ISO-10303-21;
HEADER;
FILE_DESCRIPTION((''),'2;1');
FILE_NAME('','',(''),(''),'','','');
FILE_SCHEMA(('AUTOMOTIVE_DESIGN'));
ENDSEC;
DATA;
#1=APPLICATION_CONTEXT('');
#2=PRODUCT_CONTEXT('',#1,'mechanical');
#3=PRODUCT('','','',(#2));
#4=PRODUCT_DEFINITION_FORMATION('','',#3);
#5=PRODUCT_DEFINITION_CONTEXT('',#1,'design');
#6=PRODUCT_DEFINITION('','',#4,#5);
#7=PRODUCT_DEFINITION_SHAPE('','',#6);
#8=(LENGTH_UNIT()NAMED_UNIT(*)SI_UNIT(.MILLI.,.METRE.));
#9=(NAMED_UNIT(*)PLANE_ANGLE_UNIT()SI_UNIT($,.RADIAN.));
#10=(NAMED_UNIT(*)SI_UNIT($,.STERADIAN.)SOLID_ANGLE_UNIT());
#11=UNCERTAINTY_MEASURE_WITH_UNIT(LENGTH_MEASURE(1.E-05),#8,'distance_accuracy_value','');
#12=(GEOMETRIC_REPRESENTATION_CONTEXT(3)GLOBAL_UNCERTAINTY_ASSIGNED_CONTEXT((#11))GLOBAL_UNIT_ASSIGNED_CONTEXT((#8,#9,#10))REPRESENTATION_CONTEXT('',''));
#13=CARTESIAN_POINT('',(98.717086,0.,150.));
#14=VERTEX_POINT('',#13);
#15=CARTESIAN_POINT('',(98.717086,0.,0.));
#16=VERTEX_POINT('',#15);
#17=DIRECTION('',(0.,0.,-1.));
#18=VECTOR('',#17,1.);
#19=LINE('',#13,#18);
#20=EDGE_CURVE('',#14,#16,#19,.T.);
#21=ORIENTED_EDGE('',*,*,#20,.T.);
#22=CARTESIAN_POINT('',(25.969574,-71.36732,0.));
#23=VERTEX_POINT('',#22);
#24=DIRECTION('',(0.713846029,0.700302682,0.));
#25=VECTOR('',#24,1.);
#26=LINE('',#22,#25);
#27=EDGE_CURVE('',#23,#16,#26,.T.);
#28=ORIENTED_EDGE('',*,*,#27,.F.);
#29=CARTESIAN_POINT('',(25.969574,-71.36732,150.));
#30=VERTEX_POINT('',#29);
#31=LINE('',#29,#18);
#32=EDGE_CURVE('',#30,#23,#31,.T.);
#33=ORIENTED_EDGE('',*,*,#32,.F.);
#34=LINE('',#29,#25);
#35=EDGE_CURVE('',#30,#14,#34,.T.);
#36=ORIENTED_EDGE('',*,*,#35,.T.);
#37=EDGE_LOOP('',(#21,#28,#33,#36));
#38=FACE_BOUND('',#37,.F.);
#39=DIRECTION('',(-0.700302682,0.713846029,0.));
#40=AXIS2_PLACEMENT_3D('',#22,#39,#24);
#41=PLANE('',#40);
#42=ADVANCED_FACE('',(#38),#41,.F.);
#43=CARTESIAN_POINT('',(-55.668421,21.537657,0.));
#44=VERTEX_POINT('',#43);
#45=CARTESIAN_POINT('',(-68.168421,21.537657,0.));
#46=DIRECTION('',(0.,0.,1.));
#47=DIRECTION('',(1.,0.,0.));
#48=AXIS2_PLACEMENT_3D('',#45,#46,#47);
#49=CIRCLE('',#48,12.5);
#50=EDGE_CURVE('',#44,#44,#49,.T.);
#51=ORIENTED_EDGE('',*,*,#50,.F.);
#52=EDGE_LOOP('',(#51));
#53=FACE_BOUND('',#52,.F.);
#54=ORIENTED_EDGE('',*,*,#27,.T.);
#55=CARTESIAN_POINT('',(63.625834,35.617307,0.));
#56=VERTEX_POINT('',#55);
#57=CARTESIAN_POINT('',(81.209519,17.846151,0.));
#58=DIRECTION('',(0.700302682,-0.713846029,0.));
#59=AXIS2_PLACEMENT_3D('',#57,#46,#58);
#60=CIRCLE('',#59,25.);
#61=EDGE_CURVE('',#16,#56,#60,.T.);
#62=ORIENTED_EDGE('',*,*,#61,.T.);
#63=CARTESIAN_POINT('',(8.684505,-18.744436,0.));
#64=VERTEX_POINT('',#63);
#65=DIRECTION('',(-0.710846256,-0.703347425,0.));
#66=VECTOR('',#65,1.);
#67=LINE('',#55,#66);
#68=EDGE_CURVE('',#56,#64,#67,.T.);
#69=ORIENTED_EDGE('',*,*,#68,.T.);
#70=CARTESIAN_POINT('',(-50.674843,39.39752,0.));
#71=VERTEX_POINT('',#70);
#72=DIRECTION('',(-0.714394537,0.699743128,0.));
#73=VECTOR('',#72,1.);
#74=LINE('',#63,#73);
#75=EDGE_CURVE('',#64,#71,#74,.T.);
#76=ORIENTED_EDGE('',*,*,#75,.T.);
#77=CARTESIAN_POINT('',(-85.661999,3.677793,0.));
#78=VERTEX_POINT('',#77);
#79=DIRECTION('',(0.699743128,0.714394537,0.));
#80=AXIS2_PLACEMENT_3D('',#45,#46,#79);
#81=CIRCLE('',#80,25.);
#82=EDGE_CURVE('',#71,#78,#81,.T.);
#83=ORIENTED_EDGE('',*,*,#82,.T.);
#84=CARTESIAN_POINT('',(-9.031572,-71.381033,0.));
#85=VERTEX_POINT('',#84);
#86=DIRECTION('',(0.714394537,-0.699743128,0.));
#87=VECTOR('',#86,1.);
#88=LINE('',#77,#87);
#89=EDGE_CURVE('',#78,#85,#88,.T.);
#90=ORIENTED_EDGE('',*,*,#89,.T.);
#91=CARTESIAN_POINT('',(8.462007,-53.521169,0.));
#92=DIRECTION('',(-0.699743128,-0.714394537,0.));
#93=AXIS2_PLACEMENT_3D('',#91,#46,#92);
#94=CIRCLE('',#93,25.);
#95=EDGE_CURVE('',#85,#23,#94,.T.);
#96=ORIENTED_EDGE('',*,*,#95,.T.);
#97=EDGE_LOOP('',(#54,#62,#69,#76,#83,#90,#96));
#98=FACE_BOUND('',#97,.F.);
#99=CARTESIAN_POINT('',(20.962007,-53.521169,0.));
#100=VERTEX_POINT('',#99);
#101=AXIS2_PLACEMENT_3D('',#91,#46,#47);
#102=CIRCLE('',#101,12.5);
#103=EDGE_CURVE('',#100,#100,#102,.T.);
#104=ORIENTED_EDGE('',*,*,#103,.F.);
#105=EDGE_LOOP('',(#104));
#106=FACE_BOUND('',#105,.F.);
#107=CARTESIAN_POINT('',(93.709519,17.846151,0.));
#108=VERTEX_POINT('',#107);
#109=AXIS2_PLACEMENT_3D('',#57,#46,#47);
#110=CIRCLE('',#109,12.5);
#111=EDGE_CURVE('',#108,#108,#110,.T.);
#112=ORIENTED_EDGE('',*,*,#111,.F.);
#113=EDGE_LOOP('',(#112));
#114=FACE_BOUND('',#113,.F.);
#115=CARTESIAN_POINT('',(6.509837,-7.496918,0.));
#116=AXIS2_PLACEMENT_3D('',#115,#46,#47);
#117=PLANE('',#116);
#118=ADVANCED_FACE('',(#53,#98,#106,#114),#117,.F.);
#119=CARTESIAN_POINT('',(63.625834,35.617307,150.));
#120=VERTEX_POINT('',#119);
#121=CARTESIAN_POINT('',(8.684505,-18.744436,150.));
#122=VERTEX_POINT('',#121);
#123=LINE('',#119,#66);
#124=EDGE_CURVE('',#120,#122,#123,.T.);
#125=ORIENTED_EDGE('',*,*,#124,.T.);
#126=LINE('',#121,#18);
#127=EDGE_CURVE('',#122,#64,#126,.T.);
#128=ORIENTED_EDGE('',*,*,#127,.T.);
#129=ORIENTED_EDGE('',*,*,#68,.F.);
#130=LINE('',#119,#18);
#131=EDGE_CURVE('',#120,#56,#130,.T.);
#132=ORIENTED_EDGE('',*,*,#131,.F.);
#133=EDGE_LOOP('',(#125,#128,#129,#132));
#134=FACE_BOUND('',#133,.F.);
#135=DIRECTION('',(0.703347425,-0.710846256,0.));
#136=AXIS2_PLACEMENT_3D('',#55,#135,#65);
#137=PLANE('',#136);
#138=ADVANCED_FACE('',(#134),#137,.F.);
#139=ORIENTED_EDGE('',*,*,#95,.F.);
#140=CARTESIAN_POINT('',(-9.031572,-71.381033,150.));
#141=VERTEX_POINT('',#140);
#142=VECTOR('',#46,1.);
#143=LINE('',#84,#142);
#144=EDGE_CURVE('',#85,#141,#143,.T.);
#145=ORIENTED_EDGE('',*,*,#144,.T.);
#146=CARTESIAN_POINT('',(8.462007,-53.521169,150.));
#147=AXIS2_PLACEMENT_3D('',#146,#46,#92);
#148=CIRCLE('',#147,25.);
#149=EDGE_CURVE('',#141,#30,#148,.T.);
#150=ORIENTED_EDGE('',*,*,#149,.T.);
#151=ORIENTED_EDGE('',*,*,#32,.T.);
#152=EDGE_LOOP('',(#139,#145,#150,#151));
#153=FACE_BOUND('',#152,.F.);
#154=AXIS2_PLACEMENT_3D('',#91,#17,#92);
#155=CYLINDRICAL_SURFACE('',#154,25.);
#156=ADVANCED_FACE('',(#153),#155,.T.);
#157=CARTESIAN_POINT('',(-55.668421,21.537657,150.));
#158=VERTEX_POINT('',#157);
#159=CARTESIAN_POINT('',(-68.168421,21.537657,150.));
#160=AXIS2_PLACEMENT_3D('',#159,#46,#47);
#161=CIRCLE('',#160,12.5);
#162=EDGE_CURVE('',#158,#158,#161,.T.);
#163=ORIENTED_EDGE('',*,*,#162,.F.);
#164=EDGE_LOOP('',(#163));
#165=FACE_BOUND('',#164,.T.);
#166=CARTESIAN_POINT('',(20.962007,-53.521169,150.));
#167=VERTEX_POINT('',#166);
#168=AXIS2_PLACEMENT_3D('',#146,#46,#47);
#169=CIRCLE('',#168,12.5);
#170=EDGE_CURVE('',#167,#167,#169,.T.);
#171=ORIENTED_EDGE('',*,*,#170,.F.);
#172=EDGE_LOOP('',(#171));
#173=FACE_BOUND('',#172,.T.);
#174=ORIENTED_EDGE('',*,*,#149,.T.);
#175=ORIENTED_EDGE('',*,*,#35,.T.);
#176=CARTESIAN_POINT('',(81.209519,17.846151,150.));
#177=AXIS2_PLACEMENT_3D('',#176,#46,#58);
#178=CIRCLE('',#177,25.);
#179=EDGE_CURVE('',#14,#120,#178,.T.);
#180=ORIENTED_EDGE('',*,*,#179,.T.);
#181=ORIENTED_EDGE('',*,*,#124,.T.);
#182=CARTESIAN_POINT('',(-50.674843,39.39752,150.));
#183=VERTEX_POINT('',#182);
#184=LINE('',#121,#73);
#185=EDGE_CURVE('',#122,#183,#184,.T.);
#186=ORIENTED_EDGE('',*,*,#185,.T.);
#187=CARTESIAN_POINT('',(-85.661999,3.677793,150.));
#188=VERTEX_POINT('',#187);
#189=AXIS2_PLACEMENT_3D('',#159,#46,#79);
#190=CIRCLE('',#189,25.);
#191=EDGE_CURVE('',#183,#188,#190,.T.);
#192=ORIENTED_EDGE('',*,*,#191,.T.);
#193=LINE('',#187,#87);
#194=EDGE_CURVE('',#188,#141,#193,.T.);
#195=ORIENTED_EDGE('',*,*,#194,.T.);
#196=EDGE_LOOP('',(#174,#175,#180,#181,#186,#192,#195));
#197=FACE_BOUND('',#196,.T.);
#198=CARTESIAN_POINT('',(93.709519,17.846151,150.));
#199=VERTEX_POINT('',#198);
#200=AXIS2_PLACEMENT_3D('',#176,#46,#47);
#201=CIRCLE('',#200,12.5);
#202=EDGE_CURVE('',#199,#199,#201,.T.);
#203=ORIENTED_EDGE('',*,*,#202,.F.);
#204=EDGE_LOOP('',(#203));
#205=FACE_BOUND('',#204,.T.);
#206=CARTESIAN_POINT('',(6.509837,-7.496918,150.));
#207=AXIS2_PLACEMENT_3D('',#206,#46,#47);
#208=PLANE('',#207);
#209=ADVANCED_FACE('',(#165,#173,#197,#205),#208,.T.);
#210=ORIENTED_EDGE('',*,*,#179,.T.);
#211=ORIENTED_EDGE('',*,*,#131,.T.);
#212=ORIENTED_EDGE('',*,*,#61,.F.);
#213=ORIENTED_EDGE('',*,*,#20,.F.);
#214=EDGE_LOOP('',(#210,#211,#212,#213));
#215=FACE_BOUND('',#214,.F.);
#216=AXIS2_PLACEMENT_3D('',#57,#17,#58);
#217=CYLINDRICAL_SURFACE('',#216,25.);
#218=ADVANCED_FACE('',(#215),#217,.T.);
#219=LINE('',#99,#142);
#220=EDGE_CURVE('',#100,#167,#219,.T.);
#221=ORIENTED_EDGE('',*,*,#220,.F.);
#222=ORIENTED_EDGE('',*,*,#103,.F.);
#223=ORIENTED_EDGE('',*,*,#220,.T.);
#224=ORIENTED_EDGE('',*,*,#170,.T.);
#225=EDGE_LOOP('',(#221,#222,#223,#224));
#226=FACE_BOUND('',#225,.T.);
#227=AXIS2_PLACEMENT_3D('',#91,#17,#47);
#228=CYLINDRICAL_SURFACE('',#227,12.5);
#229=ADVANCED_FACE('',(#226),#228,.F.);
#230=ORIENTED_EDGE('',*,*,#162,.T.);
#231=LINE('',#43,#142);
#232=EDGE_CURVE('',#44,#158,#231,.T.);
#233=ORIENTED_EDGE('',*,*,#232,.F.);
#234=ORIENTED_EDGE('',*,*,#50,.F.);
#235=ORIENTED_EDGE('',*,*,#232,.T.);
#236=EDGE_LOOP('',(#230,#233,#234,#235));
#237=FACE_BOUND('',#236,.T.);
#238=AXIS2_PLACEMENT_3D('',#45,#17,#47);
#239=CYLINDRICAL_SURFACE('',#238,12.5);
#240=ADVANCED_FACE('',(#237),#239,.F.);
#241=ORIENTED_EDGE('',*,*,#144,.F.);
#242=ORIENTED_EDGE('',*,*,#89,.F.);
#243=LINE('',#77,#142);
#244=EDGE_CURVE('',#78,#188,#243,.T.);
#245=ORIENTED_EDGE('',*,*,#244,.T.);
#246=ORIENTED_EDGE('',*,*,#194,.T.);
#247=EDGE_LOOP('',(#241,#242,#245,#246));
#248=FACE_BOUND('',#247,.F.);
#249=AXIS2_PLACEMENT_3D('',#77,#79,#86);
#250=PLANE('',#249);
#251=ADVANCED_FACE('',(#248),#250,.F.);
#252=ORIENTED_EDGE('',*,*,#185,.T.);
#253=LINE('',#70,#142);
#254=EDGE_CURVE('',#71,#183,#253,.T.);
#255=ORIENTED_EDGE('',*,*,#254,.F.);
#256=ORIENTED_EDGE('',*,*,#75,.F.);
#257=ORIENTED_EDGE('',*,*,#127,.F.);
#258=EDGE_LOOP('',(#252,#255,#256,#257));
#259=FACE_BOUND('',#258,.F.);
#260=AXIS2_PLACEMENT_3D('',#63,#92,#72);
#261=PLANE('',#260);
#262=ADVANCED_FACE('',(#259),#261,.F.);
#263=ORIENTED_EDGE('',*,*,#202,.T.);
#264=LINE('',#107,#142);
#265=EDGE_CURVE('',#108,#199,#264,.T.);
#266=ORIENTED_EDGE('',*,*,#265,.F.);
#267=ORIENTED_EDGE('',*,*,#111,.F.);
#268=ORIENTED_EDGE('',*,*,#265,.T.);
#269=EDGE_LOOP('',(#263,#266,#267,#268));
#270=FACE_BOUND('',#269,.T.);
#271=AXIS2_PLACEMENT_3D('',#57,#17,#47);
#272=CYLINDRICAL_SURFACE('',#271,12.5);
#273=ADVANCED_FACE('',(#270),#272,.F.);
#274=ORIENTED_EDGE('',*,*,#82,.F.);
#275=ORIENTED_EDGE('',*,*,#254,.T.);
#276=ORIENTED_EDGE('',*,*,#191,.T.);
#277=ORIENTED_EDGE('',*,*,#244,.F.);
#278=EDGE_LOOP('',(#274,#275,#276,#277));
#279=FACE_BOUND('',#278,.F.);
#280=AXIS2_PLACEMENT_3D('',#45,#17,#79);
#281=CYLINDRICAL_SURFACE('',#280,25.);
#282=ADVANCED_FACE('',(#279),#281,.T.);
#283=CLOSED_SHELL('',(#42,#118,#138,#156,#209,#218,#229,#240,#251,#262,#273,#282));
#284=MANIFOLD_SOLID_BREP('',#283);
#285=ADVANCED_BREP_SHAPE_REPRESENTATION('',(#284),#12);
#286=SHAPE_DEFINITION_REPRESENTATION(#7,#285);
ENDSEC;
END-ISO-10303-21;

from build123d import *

# Parameters (mm, degrees)
F0_R     = 12.5
F1_DEPTH = 150
F3_DEPTH = 50


# Not quite as in the source:
# - the program builds the solid bodies; features that only make, move or delete a surface that nothing else refers to are left out


with BuildPart() as f1:
    # F0 (on Top) → F1 (new body)
    with BuildSketch(Plane.XY):
        with BuildLine():
            Line((8.6845052377, -18.7444362128), (-50.6748429861, 39.3975202147))
            ThreePointArc((-50.6748429861, 39.3975202147), (-86.0282846169, 39.0312350068), (-85.661999409, 3.6777933759))
            Line((-85.661999409, 3.6777933759), (-9.0315715293, -71.3810327757))
            ThreePointArc((-9.0315715293, -71.3810327757), (8.4718011348, -78.5211674377), (25.9695737293, -71.3673200922))
            Line((25.9695737293, -71.3673200922), (98.7170861934, 0))
            ThreePointArc((98.7170861934, 0), (99.0182133881, 35.3918171352), (63.6258335307, 35.6173071466))
            Line((63.6258335307, 35.6173071466), (8.6845052377, -18.7444362128))
        make_face()
        with Locations((8.4620066821, -53.5211693563)):
            Circle(F0_R, mode=Mode.SUBTRACT)
        with Locations((-68.1684211975, 21.5376567953)):
            Circle(F0_R, mode=Mode.SUBTRACT)
        with Locations((81.2095191462, 17.8461507359)):
            Circle(F0_R, mode=Mode.SUBTRACT)
    extrude(amount=F1_DEPTH)

    # F0 (on Top) → F3 (join)
    with BuildSketch(Plane.XY):
        with BuildLine():
            Line((8.6845052377, -18.7444362128), (-50.6748429861, 39.3975202147))
            ThreePointArc((-50.6748429861, 39.3975202147), (-86.0282846169, 39.0312350068), (-85.661999409, 3.6777933759))
            Line((-85.661999409, 3.6777933759), (-9.0315715293, -71.3810327757))
            ThreePointArc((-9.0315715293, -71.3810327757), (8.4718011348, -78.5211674377), (25.9695737293, -71.3673200922))
            Line((25.9695737293, -71.3673200922), (98.7170861934, 0))
            ThreePointArc((98.7170861934, 0), (99.0182133881, 35.3918171352), (63.6258335307, 35.6173071466))
            Line((63.6258335307, 35.6173071466), (8.6845052377, -18.7444362128))
        make_face()
        with Locations((8.4620066821, -53.5211693563)):
            Circle(F0_R, mode=Mode.SUBTRACT)
        with Locations((-68.1684211975, 21.5376567953)):
            Circle(F0_R, mode=Mode.SUBTRACT)
        with Locations((81.2095191462, 17.8461507359)):
            Circle(F0_R, mode=Mode.SUBTRACT)
    extrude(amount=F3_DEPTH)


solid = f1.part
